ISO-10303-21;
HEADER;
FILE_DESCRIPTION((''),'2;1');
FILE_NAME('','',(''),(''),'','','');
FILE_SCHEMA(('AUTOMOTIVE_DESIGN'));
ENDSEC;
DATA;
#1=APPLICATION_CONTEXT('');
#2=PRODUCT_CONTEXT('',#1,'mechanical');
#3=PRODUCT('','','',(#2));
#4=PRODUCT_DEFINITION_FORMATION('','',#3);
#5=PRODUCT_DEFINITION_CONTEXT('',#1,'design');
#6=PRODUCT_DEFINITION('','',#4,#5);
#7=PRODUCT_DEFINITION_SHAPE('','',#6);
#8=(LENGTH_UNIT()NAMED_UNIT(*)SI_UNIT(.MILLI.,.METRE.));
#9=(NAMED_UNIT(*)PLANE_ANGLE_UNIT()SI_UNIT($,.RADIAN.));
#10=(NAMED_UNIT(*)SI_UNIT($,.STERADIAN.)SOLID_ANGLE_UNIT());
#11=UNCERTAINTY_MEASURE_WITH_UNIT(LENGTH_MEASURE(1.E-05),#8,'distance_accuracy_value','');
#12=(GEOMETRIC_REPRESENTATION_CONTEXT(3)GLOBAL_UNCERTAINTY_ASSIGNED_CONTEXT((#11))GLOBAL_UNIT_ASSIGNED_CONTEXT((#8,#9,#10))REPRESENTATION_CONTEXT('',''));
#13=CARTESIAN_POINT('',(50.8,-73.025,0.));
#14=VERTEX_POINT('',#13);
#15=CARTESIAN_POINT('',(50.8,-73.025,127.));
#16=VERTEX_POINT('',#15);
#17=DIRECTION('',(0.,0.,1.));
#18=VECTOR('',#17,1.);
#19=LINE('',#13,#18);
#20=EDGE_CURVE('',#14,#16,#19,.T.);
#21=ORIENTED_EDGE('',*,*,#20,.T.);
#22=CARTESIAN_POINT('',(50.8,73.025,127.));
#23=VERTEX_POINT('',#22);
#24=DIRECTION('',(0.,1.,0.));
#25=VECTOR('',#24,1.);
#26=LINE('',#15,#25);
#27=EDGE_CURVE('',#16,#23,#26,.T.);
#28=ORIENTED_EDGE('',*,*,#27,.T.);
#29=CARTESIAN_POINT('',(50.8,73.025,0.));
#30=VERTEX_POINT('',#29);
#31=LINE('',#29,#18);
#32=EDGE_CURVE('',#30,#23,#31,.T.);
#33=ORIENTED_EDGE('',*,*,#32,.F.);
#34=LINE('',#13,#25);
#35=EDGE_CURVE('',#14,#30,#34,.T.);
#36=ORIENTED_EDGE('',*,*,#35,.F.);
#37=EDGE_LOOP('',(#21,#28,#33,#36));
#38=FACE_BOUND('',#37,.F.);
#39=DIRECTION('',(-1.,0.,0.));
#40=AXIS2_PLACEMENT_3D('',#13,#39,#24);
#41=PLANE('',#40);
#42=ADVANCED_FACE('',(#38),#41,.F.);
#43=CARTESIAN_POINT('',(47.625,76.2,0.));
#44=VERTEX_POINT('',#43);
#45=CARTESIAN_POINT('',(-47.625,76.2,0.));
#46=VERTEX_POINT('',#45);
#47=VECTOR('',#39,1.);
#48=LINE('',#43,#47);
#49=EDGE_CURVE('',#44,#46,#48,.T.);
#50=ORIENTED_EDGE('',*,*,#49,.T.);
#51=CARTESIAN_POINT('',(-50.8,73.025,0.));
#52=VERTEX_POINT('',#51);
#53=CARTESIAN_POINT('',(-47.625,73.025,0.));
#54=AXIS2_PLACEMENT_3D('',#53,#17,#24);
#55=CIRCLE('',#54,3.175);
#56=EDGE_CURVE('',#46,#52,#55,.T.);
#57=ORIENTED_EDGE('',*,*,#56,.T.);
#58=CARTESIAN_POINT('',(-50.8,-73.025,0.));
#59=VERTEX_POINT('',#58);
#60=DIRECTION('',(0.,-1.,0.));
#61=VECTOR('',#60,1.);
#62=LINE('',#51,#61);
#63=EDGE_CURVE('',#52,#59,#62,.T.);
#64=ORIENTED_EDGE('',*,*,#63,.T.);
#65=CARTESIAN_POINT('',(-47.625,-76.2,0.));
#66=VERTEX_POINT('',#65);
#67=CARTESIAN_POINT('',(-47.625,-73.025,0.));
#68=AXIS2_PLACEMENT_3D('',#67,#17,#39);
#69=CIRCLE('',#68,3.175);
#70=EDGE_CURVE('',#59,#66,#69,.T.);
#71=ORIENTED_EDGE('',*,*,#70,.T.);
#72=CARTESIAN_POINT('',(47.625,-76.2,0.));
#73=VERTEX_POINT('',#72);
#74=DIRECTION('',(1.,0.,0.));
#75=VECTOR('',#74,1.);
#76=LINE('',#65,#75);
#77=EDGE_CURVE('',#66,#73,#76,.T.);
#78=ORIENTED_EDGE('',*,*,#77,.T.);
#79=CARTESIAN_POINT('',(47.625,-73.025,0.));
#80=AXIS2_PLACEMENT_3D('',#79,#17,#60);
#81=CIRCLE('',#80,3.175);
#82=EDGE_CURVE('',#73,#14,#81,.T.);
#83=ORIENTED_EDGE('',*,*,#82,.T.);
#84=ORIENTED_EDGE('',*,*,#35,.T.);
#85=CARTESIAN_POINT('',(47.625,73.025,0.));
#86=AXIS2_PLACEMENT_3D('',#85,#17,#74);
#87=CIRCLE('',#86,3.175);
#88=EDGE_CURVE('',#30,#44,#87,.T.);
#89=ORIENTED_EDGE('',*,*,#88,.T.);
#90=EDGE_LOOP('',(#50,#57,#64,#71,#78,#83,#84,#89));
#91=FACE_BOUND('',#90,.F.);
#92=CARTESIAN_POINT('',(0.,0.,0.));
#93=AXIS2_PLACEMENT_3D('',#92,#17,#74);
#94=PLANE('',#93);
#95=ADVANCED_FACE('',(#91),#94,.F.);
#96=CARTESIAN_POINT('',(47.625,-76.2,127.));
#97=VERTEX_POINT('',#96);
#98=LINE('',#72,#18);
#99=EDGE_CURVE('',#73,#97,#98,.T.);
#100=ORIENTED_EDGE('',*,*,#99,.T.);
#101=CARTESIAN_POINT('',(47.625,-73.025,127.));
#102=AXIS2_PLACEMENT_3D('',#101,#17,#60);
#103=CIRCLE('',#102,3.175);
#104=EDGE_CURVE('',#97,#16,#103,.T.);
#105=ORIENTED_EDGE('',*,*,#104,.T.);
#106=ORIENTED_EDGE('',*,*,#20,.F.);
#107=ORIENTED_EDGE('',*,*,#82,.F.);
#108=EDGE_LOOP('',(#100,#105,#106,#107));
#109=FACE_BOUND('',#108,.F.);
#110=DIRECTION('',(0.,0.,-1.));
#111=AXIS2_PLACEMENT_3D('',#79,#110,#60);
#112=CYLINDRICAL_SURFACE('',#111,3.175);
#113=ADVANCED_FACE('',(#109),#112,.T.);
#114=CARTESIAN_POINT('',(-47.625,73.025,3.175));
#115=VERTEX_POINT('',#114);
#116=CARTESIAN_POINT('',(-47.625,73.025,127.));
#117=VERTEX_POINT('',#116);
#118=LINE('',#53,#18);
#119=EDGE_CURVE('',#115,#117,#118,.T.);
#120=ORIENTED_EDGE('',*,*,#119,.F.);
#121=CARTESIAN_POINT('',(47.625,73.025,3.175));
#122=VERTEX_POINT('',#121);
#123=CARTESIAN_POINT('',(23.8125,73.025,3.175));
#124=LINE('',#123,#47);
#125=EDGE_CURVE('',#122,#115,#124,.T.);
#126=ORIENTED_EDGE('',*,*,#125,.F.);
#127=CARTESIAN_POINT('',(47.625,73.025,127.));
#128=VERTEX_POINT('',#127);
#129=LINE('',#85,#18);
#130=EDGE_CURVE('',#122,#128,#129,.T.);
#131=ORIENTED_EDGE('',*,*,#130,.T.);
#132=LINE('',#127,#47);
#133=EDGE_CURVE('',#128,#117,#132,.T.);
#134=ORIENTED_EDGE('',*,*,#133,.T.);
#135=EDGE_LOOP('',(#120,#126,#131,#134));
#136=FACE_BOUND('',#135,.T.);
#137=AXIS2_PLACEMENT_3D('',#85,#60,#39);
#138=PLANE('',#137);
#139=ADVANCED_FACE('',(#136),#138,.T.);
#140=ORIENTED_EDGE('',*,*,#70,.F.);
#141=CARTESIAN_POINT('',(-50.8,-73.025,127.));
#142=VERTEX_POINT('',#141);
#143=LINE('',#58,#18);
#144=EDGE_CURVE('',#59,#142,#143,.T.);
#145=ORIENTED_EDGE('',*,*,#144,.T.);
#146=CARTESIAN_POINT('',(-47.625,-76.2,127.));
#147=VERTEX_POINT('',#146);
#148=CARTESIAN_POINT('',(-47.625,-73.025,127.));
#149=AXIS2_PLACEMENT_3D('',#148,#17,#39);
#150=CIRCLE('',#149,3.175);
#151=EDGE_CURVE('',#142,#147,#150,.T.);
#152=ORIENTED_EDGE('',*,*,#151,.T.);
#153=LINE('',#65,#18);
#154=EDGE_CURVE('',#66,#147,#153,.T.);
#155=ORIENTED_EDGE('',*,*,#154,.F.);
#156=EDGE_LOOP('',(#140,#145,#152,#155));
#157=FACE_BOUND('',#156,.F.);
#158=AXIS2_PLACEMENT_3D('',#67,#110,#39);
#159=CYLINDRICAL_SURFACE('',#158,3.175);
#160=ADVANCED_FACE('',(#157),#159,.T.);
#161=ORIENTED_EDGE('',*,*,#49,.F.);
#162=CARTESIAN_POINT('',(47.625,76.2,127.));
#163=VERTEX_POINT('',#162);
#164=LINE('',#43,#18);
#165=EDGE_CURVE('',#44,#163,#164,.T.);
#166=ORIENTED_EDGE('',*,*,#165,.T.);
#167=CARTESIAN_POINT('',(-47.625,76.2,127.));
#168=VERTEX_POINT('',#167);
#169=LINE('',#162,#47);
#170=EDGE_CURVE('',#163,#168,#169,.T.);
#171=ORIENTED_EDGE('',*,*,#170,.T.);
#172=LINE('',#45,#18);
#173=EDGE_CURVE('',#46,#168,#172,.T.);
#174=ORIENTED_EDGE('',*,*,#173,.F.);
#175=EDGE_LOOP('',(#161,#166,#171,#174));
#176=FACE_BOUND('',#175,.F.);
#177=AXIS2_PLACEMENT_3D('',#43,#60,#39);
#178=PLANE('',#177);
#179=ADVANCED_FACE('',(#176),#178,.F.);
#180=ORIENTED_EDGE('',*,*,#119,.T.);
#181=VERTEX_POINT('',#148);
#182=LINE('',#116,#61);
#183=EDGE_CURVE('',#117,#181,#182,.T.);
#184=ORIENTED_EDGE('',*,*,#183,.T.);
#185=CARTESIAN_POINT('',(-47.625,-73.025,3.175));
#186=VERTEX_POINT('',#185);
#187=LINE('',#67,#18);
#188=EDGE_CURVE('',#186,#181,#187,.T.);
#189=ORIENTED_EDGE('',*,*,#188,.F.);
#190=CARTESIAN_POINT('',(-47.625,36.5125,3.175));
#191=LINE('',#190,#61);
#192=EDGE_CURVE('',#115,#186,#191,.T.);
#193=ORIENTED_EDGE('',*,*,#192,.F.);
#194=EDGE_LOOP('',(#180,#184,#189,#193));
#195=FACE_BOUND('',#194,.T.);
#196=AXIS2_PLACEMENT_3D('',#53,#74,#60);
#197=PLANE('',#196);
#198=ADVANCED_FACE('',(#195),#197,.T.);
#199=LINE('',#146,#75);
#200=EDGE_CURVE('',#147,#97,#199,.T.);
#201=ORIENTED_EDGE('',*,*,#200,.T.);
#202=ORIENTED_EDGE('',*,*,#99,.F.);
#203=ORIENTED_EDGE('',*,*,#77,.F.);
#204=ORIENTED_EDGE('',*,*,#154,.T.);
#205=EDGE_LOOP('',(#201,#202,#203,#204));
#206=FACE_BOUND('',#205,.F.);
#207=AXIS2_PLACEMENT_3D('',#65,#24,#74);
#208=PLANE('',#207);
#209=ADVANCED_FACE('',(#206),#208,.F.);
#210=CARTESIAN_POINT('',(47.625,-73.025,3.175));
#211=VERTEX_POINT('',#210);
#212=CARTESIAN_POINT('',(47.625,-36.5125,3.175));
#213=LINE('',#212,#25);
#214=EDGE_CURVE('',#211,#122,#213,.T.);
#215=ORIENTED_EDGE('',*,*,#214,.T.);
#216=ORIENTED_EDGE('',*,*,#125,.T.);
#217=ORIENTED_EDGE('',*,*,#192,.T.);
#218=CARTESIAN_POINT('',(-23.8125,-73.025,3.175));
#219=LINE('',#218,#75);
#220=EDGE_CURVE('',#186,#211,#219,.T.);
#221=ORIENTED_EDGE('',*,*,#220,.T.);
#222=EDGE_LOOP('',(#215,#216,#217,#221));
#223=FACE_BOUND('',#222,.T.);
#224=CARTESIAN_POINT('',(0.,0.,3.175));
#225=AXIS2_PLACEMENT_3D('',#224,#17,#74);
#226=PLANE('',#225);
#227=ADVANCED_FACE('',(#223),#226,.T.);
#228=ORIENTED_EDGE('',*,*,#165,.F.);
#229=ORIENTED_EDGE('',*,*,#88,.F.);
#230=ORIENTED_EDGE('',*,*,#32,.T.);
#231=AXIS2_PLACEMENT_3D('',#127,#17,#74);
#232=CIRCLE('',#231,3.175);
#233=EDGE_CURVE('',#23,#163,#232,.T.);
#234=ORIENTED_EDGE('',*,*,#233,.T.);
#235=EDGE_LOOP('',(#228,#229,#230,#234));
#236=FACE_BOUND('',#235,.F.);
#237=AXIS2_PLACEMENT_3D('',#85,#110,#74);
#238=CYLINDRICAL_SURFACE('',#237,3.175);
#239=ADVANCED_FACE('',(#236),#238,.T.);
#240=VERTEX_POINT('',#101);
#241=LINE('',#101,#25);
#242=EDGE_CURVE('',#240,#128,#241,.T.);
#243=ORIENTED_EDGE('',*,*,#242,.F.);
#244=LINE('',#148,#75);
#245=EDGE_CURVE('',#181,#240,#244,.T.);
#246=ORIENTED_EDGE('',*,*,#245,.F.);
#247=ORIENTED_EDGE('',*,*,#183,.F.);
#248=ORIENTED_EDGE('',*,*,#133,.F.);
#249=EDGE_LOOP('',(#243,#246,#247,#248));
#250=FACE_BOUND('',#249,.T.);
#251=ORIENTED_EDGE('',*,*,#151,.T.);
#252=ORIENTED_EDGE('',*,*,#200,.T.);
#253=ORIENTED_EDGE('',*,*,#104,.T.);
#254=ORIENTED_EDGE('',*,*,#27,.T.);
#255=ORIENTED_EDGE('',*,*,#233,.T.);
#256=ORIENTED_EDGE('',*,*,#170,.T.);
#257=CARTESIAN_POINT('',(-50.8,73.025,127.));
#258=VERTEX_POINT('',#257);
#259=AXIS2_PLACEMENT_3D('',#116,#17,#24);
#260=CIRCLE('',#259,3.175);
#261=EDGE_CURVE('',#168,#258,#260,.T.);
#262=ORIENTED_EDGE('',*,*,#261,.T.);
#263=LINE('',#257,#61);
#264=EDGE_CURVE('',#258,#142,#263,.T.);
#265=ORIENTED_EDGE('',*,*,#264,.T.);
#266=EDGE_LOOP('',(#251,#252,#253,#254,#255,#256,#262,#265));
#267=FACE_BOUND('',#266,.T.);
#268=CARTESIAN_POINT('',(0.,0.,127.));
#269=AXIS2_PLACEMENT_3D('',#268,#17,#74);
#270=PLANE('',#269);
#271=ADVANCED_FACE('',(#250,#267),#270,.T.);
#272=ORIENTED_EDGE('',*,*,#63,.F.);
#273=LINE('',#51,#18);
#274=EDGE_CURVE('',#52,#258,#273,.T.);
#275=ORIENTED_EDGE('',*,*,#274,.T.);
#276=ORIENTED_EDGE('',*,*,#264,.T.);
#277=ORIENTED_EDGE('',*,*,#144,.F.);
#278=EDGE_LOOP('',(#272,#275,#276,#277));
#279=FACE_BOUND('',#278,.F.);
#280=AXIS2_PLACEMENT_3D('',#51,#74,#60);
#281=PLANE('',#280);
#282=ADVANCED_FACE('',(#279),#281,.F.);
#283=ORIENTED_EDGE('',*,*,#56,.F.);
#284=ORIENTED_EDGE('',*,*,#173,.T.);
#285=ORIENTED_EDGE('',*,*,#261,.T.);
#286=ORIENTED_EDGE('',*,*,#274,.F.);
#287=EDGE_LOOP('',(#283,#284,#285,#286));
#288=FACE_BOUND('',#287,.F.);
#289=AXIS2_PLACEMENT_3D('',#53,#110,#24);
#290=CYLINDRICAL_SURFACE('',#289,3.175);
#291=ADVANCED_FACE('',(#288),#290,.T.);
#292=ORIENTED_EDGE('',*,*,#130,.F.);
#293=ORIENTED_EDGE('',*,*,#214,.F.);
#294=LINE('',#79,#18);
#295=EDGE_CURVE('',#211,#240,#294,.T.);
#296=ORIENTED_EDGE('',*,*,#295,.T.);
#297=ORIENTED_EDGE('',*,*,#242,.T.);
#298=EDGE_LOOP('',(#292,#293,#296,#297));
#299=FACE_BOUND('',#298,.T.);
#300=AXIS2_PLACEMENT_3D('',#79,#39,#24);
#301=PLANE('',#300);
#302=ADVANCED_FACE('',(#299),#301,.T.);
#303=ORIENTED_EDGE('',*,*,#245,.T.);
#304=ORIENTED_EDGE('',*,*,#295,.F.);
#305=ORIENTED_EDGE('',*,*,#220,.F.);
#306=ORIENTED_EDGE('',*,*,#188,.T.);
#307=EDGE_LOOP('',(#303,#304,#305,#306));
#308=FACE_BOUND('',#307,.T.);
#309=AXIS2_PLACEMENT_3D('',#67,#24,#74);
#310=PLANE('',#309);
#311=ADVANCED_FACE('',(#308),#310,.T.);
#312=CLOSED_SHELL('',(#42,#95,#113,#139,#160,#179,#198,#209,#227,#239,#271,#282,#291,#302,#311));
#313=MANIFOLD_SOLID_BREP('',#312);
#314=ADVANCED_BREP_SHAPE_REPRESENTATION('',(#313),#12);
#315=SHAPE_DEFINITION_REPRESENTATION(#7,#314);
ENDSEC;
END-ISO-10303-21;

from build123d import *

# Parameters (mm, degrees)
F1_DEPTH = 127
F2_T     = 3.175


# Not quite as in the source:
# - a shell that OpenCascade refuses in one call is made with other operations: the cavity is built on its own and cut out


with BuildPart() as f1:
    # F0 (on Top) → F1 (new body)
    with BuildSketch(Plane.XY):
        with BuildLine():
            ThreePointArc((50.8, 73.025), (49.8700640303, 75.2700640303), (47.625, 76.2))
            Line((47.625, 76.2), (-47.625, 76.2))
            ThreePointArc((-47.625, 76.2), (-49.8700640303, 75.2700640303), (-50.8, 73.025))
            Line((-50.8, 73.025), (-50.8, -73.025))
            ThreePointArc((-50.8, -73.025), (-49.8700640303, -75.2700640303), (-47.625, -76.2))
            Line((-47.625, -76.2), (47.625, -76.2))
            ThreePointArc((47.625, -76.2), (49.8700640303, -75.2700640303), (50.8, -73.025))
            Line((50.8, -73.025), (50.8, 73.025))
        make_face()
    extrude(amount=F1_DEPTH)

    # F2: shell of thickness 3.175, made by hand


with BuildPart() as f2_core1:
    # F2_t2: copy of F1
    add(f1.part)

    # the walls: a layer under each face that stays
    f2_faces = [f2_core1.faces().sort_by_distance(p)[0] for p in [
        (0, 76.2, 63.5),
        (-50.8, 0, 63.5),
        (0, -76.2, 63.5),
        (50.8, 0, 63.5),
        (0, 0, 0),
    ]]
    thicken(f2_faces, amount=-F2_T, mode=Mode.SUBTRACT)


with BuildPart() as f1_1:
    add(f1.part)

    # what is left inside the walls is the cavity
    f2_cavity = [f2_core1.part.solids().sort_by_distance(p)[0] for p in [
        (47.59325, 0, 85.725),
    ]]
    add(f2_cavity, mode=Mode.SUBTRACT)


solid = f1_1.part
